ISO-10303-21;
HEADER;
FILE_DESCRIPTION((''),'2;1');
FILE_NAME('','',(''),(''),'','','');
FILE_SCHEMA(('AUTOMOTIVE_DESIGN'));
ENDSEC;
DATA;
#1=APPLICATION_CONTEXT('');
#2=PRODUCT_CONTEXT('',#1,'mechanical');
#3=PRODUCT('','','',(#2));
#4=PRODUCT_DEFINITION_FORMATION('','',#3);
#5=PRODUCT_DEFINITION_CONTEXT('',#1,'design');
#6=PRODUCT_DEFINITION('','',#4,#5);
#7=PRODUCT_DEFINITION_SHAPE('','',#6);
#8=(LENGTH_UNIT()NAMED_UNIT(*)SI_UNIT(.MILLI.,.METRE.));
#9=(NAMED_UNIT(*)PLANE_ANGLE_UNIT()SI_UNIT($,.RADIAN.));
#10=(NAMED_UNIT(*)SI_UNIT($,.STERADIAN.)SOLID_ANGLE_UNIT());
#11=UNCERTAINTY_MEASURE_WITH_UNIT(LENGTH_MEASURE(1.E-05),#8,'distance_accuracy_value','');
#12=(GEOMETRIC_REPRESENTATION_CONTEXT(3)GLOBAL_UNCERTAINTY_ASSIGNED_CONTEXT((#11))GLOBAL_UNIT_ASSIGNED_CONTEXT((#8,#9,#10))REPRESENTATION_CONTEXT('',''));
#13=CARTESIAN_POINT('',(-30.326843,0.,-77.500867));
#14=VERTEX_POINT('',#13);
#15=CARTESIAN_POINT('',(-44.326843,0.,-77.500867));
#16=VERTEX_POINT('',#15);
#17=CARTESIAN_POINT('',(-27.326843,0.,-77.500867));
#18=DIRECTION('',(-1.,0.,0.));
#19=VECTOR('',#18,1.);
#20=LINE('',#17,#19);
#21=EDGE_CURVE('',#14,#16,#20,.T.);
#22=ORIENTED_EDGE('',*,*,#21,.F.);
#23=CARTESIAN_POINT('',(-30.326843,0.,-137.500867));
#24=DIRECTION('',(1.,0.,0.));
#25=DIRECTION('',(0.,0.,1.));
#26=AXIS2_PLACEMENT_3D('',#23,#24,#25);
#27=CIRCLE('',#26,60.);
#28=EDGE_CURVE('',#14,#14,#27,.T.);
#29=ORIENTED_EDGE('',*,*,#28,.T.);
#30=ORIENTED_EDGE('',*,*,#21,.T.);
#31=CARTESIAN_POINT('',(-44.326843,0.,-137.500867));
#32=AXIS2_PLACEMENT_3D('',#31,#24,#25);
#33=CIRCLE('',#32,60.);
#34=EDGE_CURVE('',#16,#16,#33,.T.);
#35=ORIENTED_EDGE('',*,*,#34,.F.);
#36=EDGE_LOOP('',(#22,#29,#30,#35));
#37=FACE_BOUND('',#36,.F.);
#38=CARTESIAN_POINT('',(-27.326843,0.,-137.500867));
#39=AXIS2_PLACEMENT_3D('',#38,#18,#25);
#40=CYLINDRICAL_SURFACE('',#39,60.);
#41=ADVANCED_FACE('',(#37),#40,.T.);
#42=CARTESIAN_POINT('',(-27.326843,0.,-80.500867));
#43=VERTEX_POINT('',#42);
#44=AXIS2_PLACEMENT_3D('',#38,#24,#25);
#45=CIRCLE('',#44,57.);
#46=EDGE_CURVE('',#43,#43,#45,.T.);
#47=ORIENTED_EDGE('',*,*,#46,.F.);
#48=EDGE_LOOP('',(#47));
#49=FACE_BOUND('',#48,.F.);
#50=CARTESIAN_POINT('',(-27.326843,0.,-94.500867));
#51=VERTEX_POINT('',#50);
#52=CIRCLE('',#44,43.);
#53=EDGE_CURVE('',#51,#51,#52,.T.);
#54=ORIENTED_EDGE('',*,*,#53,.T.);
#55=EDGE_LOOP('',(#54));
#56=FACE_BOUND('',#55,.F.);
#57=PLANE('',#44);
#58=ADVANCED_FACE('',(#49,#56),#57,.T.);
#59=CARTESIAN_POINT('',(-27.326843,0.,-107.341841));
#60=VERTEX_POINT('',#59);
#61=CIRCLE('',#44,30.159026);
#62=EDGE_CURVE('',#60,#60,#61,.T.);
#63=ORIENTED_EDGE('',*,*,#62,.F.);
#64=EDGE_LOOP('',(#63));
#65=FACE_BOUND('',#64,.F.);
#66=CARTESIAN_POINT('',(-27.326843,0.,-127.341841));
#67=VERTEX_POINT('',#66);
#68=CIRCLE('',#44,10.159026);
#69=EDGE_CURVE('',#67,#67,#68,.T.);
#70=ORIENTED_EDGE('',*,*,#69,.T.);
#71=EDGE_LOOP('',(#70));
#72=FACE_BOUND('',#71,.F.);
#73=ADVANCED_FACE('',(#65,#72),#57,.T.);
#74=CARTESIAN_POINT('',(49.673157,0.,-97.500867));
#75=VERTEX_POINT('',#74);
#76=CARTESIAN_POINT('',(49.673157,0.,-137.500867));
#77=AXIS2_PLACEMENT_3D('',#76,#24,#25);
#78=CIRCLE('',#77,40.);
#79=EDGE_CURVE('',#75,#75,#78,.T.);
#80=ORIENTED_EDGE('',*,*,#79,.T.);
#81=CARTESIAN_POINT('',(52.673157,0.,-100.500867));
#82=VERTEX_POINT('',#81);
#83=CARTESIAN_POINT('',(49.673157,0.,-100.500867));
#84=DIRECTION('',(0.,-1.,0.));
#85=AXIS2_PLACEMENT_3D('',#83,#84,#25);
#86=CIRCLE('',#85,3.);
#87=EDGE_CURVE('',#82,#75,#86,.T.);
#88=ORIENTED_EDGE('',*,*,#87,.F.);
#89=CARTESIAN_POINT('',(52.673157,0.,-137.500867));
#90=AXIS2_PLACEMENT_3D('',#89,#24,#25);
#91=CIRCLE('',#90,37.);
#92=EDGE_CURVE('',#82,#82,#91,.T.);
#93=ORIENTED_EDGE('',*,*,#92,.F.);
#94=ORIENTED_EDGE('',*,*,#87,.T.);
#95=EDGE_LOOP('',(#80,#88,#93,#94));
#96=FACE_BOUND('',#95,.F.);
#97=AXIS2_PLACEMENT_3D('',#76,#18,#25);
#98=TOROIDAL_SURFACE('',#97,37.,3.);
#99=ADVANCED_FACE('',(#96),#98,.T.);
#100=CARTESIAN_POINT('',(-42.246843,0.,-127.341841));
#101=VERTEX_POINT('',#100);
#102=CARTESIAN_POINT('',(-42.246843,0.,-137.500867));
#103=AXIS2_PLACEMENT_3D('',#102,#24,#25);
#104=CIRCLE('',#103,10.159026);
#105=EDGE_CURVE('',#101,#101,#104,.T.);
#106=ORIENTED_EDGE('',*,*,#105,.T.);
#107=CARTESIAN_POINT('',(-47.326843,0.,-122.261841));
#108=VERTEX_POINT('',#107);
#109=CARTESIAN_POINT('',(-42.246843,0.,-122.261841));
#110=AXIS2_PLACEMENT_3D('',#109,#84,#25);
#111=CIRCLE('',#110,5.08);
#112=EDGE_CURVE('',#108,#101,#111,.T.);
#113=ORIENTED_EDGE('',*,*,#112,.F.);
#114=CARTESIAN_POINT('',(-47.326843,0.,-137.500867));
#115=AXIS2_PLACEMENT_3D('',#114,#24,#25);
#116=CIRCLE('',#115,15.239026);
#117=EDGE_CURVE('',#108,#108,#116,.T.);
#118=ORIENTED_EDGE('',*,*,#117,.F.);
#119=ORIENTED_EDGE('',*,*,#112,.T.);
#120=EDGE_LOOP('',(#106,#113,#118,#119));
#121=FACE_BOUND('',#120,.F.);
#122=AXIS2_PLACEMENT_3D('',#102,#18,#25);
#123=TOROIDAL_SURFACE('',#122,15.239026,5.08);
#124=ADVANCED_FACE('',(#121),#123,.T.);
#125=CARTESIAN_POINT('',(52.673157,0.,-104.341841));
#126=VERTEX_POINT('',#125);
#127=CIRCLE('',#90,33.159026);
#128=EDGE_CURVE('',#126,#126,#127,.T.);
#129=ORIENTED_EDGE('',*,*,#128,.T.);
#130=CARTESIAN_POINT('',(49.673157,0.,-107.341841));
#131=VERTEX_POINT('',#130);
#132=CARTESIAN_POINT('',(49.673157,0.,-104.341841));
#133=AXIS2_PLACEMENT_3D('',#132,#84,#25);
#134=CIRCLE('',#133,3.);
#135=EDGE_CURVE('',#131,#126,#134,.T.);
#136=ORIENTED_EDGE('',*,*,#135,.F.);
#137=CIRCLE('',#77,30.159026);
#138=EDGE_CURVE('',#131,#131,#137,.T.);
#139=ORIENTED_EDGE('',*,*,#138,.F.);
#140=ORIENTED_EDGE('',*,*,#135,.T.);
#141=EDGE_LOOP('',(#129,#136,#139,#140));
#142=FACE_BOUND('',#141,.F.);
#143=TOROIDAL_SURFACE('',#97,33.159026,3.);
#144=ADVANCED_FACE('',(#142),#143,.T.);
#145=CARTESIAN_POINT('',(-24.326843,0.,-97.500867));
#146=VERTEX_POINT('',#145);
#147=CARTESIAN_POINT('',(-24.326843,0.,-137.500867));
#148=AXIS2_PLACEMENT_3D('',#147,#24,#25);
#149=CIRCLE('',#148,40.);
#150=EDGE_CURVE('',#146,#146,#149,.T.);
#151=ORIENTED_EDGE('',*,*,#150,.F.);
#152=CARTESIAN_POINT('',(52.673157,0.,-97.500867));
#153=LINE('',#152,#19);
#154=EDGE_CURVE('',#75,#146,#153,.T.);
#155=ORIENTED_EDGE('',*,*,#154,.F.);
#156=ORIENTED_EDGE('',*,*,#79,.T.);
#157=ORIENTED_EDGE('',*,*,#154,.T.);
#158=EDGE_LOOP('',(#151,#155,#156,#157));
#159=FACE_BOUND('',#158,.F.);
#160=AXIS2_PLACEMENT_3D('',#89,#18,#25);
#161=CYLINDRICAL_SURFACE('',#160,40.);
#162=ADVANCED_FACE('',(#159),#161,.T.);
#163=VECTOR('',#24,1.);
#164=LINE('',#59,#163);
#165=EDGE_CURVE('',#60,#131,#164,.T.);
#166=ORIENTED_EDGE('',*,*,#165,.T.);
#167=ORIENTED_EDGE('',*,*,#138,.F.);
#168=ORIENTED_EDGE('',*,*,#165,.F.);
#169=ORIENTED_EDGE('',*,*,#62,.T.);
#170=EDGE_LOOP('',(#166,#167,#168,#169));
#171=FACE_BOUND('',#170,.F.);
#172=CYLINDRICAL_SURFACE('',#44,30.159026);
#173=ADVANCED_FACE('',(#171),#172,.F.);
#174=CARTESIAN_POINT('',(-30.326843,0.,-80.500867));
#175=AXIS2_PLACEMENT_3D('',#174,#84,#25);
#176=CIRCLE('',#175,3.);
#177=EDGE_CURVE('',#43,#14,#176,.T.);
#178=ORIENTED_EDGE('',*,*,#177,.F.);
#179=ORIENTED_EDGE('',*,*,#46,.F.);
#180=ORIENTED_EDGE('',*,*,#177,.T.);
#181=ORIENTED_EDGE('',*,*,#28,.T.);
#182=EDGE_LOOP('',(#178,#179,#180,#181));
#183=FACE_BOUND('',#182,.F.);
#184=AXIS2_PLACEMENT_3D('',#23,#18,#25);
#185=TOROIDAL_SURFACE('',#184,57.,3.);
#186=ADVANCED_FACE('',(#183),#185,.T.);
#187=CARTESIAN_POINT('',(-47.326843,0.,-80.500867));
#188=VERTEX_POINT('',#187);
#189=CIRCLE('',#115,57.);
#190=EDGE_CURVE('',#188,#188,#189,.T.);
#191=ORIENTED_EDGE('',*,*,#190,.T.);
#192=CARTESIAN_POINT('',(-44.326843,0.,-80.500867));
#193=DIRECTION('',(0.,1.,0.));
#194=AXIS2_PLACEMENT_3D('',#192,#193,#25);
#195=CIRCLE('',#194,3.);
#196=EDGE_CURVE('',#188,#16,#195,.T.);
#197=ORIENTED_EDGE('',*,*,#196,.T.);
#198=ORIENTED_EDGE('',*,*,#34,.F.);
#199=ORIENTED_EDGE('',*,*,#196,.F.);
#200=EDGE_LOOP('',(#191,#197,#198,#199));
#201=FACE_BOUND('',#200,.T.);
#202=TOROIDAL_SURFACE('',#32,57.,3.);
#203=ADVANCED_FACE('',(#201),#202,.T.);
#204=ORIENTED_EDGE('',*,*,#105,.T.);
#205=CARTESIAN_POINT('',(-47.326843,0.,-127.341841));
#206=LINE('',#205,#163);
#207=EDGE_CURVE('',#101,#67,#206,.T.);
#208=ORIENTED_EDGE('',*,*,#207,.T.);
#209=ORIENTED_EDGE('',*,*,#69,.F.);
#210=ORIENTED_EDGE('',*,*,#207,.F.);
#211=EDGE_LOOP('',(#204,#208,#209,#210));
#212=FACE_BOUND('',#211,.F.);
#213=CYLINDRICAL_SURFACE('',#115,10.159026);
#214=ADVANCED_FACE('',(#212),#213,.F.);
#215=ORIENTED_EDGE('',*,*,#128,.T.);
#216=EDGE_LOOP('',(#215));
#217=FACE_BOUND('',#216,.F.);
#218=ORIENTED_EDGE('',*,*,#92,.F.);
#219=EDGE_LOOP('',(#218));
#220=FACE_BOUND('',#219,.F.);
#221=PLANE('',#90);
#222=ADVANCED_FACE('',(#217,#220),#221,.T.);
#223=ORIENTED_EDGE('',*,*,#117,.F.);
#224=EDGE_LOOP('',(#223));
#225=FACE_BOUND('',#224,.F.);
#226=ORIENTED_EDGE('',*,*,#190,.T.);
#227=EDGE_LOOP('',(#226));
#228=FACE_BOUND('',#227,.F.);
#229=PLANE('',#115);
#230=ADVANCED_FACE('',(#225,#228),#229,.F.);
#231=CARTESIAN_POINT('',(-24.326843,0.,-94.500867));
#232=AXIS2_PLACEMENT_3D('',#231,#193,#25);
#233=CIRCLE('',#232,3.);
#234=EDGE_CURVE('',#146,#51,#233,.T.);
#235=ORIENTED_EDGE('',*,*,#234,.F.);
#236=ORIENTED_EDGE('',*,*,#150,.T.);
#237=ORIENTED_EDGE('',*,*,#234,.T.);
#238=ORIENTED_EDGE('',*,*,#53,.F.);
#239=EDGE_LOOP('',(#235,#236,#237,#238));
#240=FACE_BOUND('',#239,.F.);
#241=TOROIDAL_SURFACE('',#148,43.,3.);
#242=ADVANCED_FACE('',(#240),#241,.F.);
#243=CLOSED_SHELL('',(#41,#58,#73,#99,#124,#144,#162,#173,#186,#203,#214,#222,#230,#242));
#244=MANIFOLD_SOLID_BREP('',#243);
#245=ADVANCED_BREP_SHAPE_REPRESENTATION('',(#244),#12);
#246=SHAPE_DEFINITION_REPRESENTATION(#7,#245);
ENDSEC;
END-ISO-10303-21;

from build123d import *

# Parameters (mm, degrees)
F5_R = 3
F6_R = 5.08


# Not quite as in the source:
# - a feature of the source that left no trace in its solid (it failed there, or was rolled back) is left out
# - the program builds the solid bodies; features that only make, move or delete a surface that nothing else refers to are left out


with BuildPart() as f4:
    # F3 (on Front) → F4 (revolve)
    with BuildSketch(Plane.XZ):
        Polygon((-47.3268434405, -77.5008672476), (-47.3268434405, -127.3418408632), (-27.3268434405, -127.3418408632), (-27.3268434405, -107.3418408632), (52.6731565595, -107.3418408632), (52.6731565595, -97.5008672476), (-27.3268434405, -97.5008672476), (-27.3268434405, -77.5008672476), align=None)
    revolve(axis=Axis((2.6731565595, 0, -137.5008672476), (1, 0, 0)))

    # F5
    f5_edges = [f4.edges().sort_by_distance(p)[0] for p in [
        (52.673157, 0, -167.659894),
        (52.673157, 0, -177.500867),
        (-27.326843, 0, -177.500867),
        (-27.326843, 0, -197.500867),
        (-47.326843, 0, -197.500867),
    ]]
    fillet(f5_edges, radius=F5_R)

    # F6
    f6_edges = [f4.edges().sort_by_distance(p)[0] for p in [
        (-47.326843, 0, -147.659894),
    ]]
    fillet(f6_edges, radius=F6_R)


solid = f4.part
